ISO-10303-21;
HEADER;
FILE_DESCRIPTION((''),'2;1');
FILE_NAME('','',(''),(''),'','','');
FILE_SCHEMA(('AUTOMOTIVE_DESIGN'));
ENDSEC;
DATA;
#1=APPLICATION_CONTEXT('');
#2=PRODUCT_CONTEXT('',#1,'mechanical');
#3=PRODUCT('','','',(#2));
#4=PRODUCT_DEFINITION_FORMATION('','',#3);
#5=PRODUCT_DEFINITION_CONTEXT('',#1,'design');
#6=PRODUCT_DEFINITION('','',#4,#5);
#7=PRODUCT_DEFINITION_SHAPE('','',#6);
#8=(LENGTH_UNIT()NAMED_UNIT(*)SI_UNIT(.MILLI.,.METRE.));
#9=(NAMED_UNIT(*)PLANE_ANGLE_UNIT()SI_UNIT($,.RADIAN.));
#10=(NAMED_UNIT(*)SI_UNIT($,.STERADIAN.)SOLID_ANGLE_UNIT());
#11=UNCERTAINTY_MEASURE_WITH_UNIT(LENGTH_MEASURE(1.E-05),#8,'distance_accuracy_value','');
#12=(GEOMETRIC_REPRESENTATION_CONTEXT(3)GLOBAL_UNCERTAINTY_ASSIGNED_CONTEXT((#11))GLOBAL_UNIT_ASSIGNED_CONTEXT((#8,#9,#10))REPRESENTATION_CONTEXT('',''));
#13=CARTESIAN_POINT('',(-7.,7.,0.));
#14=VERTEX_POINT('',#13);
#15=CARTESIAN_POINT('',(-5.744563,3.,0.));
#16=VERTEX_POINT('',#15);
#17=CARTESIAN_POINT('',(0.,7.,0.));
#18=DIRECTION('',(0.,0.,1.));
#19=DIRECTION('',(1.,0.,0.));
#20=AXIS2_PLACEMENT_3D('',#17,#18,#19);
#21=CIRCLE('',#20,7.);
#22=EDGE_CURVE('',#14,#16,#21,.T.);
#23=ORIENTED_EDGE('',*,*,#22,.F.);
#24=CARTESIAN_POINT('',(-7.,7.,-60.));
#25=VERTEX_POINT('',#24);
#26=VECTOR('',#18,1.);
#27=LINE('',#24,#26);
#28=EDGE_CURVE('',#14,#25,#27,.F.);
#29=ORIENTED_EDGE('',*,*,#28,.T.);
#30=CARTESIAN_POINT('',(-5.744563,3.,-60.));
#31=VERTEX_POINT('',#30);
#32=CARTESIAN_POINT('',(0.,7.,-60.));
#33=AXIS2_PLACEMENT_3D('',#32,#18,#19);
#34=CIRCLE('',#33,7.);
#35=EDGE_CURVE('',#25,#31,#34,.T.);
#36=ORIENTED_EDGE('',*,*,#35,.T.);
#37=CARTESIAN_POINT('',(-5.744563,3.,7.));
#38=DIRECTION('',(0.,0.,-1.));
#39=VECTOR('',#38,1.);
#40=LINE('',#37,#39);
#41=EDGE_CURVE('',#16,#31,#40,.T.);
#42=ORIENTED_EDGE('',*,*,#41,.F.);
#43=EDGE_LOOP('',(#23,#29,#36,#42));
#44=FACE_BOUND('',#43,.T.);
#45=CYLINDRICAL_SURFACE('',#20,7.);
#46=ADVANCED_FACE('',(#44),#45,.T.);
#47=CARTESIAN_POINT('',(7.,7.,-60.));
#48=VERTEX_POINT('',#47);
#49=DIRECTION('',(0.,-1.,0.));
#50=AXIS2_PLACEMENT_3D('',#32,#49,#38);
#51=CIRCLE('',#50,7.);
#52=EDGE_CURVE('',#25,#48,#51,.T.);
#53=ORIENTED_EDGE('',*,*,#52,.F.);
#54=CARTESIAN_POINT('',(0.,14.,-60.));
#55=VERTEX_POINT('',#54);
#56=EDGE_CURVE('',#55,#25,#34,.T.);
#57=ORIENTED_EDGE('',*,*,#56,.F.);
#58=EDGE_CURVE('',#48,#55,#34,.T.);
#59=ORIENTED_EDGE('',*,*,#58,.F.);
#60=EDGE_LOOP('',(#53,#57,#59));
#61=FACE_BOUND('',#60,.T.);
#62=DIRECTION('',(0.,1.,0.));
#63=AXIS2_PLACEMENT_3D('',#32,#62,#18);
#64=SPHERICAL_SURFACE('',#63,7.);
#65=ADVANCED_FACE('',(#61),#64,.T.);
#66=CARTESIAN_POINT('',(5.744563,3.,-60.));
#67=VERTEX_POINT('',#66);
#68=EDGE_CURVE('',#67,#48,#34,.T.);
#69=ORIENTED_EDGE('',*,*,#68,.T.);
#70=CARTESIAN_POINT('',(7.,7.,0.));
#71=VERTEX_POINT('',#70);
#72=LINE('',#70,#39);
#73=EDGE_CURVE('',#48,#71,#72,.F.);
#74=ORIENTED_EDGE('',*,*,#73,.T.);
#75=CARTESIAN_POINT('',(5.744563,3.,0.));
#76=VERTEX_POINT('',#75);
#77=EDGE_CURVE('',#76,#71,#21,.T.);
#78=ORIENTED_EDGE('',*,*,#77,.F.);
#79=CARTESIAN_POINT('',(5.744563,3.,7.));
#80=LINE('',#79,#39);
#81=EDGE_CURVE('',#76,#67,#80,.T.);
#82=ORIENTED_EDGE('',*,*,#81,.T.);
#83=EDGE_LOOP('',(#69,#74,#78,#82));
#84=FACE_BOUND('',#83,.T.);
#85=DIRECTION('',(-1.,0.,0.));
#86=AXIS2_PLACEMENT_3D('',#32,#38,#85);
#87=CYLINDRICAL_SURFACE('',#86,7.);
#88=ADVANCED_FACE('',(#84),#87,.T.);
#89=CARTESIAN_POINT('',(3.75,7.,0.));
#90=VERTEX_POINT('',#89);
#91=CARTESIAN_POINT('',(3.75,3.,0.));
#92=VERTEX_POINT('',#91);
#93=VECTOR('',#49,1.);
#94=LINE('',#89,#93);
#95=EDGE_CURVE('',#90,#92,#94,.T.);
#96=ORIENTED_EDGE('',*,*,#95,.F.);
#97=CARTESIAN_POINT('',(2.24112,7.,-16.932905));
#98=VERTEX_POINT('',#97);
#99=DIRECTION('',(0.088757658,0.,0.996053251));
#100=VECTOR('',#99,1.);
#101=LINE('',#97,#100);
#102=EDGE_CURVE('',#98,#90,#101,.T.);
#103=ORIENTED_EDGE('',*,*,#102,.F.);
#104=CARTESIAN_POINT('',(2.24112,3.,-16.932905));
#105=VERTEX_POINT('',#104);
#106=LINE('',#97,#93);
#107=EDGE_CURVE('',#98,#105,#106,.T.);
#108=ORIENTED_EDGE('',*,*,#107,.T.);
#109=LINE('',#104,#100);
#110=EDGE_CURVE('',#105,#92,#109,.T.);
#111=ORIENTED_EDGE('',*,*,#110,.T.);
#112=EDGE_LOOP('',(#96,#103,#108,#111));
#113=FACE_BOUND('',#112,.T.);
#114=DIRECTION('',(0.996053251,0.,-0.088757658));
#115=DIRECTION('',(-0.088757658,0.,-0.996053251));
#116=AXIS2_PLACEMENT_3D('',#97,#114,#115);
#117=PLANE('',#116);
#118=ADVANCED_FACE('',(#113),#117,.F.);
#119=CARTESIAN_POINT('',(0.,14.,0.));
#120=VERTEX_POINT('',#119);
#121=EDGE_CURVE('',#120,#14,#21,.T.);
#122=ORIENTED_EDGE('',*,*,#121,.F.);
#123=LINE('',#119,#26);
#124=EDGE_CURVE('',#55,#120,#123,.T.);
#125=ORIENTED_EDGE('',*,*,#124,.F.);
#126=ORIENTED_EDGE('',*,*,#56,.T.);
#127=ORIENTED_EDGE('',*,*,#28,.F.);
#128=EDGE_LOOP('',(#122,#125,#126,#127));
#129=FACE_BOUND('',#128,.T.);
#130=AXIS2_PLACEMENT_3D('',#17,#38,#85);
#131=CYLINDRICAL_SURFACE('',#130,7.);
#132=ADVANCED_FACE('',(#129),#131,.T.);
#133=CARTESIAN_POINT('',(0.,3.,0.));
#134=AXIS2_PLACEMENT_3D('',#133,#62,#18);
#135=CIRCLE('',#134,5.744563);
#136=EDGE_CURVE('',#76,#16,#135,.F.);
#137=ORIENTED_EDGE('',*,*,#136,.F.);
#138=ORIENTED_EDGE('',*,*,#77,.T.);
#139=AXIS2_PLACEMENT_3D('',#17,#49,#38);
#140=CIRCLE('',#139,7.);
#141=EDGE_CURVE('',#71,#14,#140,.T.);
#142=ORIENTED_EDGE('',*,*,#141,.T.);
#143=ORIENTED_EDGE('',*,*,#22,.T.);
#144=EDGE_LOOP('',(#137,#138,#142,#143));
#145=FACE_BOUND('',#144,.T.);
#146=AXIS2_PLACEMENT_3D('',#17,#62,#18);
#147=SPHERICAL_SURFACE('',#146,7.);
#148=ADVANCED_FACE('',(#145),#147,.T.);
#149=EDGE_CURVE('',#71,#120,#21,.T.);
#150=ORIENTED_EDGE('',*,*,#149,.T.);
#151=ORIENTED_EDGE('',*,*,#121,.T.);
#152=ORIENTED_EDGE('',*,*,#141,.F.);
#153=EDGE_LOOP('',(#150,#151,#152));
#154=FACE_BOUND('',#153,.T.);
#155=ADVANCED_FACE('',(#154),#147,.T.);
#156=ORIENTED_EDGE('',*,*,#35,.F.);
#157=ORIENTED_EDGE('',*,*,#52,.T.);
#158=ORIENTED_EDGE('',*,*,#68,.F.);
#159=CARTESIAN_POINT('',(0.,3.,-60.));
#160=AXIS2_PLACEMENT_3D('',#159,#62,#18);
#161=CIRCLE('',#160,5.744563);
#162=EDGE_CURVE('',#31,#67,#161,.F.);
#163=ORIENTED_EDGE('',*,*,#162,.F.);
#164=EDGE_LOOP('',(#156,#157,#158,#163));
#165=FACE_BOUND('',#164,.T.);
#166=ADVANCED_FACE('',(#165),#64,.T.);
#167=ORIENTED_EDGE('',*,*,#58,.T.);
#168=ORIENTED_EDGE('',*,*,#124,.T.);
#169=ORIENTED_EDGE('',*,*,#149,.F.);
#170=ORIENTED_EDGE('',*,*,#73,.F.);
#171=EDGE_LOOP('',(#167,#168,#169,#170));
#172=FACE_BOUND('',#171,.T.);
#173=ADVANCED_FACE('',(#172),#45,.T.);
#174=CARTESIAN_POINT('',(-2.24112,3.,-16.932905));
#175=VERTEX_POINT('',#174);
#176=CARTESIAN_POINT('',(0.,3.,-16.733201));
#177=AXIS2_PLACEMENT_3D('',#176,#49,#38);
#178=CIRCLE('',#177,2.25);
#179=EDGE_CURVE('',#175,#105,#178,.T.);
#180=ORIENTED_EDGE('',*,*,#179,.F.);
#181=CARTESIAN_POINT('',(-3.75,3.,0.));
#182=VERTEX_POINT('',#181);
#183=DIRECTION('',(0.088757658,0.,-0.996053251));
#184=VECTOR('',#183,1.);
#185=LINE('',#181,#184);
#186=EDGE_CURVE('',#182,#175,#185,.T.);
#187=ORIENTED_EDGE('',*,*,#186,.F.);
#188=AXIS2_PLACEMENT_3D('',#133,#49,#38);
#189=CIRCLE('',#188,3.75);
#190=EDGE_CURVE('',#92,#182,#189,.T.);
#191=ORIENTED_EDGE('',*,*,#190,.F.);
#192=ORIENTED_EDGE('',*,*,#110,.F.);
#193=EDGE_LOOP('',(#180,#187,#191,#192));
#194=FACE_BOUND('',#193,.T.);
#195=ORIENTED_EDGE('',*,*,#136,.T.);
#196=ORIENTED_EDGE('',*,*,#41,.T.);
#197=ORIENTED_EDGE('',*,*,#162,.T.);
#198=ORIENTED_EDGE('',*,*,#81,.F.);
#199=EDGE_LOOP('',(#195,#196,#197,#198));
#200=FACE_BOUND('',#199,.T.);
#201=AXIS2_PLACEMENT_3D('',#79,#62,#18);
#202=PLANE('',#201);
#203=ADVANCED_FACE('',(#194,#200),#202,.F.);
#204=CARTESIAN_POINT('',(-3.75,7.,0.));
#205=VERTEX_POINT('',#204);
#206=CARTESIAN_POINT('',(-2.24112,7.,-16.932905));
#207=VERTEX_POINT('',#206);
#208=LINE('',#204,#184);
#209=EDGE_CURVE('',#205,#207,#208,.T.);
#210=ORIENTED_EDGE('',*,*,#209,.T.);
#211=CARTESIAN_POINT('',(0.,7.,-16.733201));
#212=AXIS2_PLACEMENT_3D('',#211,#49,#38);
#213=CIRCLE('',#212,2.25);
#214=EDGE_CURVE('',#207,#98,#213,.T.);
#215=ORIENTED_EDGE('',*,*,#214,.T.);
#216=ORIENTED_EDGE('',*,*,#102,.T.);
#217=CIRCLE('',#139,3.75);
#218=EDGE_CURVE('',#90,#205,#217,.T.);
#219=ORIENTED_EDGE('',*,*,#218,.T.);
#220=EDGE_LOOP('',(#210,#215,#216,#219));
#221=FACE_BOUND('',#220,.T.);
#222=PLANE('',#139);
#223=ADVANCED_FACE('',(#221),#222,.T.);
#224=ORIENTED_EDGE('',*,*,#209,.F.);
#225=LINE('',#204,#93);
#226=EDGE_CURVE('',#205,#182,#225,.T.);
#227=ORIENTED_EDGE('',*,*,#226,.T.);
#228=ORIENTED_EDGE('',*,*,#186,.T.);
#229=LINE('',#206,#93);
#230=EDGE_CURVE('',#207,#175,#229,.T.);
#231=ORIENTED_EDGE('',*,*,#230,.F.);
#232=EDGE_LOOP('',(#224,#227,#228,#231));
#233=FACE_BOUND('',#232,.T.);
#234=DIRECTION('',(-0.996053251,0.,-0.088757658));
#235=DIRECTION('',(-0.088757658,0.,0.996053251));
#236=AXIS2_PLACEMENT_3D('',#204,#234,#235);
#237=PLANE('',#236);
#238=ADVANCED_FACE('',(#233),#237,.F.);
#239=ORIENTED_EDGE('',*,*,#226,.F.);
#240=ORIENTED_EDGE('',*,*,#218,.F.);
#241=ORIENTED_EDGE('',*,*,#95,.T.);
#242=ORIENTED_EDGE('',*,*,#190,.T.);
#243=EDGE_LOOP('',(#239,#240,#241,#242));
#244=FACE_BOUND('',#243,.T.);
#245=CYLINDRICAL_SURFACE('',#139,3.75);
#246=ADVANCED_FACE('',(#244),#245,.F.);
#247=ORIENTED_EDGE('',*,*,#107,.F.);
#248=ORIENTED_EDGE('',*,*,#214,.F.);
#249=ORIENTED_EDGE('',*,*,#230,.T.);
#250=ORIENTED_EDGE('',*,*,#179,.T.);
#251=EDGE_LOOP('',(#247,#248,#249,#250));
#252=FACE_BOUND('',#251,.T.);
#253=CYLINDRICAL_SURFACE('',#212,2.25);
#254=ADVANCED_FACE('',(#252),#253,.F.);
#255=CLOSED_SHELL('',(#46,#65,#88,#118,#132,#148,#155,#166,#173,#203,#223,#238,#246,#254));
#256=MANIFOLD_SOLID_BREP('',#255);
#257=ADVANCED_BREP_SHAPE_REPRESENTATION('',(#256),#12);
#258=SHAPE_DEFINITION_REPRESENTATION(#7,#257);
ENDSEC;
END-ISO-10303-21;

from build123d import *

# Parameters (mm, degrees)
BOSS_EXTRUDE1_DEPTH     = 14
FILLET2_R               = 7
FILLET3_R               = 7
CUT_EXTRUDE1_DEPTH      = 69.804069744
CUT_EXTRUDE1_DEPTH_BACK = 69.804069744
SKETCH2_W               = 11.489125294
SKETCH2_H               = 3
CUT_EXTRUDE2_DEPTH      = 4


with BuildPart() as part:
    # Sketch1 → Boss-Extrude1 (new body)
    with BuildSketch(Plane(origin=(0, 0, 0), x_dir=(1, 0, 0), z_dir=(0, 1, 0))):
        with BuildLine():
            Line((-7, 0), (-7, 60))
            ThreePointArc((-7, 60), (0, 67), (7, 60))
            Line((7, 60), (7, 0))
            ThreePointArc((7, 0), (0, -7), (-7, 0))
        make_face()
    extrude(amount=BOSS_EXTRUDE1_DEPTH)

    # Fillet2
    fillet2_edges = [part.edges().sort_by_distance(p)[0] for p in [
        (0, 14, -67),
        (-7, 14, -30),
        (0, 14, 7),
        (7, 14, -30),
    ]]
    fillet(fillet2_edges, radius=FILLET2_R)

    # Fillet3
    fillet3_edges = [part.edges().sort_by_distance(p)[0] for p in [
        (-7, 0, -30),
        (0, 0, 7),
        (7, 0, -30),
        (0, 0, -67),
    ]]
    fillet(fillet3_edges, radius=FILLET3_R - 0.0001)  # a hair under: the kernel refuses the full size

    # Sketch2 → Cut-Extrude1 (cut, two sides: drawn at the far end of the back side and taken through both)
    with BuildSketch(Plane(origin=(0, 0, 0), x_dir=(-1, 0, 0), z_dir=(0, 0, -1)).offset(-CUT_EXTRUDE1_DEPTH_BACK)):
        with Locations((0, 1.5)):
            Rectangle(SKETCH2_W, SKETCH2_H)
    extrude(amount=CUT_EXTRUDE1_DEPTH + CUT_EXTRUDE1_DEPTH_BACK, mode=Mode.SUBTRACT)

    # Sketch3 → Cut-Extrude2 (cut)
    with BuildSketch(Plane.XZ.offset(-3)):
        with BuildLine():
            Line((-3.75, 0), (-2.241119814, -16.932905261))
            ThreePointArc((-2.241119814, -16.932905261), (0, -18.983200531), (2.241119814, -16.932905261))
            Line((2.241119814, -16.932905261), (3.75, 0))
            ThreePointArc((3.75, 0), (0, 3.75), (-3.75, 0))
        make_face()
    extrude(amount=-CUT_EXTRUDE2_DEPTH, mode=Mode.SUBTRACT)


solid = part.part
